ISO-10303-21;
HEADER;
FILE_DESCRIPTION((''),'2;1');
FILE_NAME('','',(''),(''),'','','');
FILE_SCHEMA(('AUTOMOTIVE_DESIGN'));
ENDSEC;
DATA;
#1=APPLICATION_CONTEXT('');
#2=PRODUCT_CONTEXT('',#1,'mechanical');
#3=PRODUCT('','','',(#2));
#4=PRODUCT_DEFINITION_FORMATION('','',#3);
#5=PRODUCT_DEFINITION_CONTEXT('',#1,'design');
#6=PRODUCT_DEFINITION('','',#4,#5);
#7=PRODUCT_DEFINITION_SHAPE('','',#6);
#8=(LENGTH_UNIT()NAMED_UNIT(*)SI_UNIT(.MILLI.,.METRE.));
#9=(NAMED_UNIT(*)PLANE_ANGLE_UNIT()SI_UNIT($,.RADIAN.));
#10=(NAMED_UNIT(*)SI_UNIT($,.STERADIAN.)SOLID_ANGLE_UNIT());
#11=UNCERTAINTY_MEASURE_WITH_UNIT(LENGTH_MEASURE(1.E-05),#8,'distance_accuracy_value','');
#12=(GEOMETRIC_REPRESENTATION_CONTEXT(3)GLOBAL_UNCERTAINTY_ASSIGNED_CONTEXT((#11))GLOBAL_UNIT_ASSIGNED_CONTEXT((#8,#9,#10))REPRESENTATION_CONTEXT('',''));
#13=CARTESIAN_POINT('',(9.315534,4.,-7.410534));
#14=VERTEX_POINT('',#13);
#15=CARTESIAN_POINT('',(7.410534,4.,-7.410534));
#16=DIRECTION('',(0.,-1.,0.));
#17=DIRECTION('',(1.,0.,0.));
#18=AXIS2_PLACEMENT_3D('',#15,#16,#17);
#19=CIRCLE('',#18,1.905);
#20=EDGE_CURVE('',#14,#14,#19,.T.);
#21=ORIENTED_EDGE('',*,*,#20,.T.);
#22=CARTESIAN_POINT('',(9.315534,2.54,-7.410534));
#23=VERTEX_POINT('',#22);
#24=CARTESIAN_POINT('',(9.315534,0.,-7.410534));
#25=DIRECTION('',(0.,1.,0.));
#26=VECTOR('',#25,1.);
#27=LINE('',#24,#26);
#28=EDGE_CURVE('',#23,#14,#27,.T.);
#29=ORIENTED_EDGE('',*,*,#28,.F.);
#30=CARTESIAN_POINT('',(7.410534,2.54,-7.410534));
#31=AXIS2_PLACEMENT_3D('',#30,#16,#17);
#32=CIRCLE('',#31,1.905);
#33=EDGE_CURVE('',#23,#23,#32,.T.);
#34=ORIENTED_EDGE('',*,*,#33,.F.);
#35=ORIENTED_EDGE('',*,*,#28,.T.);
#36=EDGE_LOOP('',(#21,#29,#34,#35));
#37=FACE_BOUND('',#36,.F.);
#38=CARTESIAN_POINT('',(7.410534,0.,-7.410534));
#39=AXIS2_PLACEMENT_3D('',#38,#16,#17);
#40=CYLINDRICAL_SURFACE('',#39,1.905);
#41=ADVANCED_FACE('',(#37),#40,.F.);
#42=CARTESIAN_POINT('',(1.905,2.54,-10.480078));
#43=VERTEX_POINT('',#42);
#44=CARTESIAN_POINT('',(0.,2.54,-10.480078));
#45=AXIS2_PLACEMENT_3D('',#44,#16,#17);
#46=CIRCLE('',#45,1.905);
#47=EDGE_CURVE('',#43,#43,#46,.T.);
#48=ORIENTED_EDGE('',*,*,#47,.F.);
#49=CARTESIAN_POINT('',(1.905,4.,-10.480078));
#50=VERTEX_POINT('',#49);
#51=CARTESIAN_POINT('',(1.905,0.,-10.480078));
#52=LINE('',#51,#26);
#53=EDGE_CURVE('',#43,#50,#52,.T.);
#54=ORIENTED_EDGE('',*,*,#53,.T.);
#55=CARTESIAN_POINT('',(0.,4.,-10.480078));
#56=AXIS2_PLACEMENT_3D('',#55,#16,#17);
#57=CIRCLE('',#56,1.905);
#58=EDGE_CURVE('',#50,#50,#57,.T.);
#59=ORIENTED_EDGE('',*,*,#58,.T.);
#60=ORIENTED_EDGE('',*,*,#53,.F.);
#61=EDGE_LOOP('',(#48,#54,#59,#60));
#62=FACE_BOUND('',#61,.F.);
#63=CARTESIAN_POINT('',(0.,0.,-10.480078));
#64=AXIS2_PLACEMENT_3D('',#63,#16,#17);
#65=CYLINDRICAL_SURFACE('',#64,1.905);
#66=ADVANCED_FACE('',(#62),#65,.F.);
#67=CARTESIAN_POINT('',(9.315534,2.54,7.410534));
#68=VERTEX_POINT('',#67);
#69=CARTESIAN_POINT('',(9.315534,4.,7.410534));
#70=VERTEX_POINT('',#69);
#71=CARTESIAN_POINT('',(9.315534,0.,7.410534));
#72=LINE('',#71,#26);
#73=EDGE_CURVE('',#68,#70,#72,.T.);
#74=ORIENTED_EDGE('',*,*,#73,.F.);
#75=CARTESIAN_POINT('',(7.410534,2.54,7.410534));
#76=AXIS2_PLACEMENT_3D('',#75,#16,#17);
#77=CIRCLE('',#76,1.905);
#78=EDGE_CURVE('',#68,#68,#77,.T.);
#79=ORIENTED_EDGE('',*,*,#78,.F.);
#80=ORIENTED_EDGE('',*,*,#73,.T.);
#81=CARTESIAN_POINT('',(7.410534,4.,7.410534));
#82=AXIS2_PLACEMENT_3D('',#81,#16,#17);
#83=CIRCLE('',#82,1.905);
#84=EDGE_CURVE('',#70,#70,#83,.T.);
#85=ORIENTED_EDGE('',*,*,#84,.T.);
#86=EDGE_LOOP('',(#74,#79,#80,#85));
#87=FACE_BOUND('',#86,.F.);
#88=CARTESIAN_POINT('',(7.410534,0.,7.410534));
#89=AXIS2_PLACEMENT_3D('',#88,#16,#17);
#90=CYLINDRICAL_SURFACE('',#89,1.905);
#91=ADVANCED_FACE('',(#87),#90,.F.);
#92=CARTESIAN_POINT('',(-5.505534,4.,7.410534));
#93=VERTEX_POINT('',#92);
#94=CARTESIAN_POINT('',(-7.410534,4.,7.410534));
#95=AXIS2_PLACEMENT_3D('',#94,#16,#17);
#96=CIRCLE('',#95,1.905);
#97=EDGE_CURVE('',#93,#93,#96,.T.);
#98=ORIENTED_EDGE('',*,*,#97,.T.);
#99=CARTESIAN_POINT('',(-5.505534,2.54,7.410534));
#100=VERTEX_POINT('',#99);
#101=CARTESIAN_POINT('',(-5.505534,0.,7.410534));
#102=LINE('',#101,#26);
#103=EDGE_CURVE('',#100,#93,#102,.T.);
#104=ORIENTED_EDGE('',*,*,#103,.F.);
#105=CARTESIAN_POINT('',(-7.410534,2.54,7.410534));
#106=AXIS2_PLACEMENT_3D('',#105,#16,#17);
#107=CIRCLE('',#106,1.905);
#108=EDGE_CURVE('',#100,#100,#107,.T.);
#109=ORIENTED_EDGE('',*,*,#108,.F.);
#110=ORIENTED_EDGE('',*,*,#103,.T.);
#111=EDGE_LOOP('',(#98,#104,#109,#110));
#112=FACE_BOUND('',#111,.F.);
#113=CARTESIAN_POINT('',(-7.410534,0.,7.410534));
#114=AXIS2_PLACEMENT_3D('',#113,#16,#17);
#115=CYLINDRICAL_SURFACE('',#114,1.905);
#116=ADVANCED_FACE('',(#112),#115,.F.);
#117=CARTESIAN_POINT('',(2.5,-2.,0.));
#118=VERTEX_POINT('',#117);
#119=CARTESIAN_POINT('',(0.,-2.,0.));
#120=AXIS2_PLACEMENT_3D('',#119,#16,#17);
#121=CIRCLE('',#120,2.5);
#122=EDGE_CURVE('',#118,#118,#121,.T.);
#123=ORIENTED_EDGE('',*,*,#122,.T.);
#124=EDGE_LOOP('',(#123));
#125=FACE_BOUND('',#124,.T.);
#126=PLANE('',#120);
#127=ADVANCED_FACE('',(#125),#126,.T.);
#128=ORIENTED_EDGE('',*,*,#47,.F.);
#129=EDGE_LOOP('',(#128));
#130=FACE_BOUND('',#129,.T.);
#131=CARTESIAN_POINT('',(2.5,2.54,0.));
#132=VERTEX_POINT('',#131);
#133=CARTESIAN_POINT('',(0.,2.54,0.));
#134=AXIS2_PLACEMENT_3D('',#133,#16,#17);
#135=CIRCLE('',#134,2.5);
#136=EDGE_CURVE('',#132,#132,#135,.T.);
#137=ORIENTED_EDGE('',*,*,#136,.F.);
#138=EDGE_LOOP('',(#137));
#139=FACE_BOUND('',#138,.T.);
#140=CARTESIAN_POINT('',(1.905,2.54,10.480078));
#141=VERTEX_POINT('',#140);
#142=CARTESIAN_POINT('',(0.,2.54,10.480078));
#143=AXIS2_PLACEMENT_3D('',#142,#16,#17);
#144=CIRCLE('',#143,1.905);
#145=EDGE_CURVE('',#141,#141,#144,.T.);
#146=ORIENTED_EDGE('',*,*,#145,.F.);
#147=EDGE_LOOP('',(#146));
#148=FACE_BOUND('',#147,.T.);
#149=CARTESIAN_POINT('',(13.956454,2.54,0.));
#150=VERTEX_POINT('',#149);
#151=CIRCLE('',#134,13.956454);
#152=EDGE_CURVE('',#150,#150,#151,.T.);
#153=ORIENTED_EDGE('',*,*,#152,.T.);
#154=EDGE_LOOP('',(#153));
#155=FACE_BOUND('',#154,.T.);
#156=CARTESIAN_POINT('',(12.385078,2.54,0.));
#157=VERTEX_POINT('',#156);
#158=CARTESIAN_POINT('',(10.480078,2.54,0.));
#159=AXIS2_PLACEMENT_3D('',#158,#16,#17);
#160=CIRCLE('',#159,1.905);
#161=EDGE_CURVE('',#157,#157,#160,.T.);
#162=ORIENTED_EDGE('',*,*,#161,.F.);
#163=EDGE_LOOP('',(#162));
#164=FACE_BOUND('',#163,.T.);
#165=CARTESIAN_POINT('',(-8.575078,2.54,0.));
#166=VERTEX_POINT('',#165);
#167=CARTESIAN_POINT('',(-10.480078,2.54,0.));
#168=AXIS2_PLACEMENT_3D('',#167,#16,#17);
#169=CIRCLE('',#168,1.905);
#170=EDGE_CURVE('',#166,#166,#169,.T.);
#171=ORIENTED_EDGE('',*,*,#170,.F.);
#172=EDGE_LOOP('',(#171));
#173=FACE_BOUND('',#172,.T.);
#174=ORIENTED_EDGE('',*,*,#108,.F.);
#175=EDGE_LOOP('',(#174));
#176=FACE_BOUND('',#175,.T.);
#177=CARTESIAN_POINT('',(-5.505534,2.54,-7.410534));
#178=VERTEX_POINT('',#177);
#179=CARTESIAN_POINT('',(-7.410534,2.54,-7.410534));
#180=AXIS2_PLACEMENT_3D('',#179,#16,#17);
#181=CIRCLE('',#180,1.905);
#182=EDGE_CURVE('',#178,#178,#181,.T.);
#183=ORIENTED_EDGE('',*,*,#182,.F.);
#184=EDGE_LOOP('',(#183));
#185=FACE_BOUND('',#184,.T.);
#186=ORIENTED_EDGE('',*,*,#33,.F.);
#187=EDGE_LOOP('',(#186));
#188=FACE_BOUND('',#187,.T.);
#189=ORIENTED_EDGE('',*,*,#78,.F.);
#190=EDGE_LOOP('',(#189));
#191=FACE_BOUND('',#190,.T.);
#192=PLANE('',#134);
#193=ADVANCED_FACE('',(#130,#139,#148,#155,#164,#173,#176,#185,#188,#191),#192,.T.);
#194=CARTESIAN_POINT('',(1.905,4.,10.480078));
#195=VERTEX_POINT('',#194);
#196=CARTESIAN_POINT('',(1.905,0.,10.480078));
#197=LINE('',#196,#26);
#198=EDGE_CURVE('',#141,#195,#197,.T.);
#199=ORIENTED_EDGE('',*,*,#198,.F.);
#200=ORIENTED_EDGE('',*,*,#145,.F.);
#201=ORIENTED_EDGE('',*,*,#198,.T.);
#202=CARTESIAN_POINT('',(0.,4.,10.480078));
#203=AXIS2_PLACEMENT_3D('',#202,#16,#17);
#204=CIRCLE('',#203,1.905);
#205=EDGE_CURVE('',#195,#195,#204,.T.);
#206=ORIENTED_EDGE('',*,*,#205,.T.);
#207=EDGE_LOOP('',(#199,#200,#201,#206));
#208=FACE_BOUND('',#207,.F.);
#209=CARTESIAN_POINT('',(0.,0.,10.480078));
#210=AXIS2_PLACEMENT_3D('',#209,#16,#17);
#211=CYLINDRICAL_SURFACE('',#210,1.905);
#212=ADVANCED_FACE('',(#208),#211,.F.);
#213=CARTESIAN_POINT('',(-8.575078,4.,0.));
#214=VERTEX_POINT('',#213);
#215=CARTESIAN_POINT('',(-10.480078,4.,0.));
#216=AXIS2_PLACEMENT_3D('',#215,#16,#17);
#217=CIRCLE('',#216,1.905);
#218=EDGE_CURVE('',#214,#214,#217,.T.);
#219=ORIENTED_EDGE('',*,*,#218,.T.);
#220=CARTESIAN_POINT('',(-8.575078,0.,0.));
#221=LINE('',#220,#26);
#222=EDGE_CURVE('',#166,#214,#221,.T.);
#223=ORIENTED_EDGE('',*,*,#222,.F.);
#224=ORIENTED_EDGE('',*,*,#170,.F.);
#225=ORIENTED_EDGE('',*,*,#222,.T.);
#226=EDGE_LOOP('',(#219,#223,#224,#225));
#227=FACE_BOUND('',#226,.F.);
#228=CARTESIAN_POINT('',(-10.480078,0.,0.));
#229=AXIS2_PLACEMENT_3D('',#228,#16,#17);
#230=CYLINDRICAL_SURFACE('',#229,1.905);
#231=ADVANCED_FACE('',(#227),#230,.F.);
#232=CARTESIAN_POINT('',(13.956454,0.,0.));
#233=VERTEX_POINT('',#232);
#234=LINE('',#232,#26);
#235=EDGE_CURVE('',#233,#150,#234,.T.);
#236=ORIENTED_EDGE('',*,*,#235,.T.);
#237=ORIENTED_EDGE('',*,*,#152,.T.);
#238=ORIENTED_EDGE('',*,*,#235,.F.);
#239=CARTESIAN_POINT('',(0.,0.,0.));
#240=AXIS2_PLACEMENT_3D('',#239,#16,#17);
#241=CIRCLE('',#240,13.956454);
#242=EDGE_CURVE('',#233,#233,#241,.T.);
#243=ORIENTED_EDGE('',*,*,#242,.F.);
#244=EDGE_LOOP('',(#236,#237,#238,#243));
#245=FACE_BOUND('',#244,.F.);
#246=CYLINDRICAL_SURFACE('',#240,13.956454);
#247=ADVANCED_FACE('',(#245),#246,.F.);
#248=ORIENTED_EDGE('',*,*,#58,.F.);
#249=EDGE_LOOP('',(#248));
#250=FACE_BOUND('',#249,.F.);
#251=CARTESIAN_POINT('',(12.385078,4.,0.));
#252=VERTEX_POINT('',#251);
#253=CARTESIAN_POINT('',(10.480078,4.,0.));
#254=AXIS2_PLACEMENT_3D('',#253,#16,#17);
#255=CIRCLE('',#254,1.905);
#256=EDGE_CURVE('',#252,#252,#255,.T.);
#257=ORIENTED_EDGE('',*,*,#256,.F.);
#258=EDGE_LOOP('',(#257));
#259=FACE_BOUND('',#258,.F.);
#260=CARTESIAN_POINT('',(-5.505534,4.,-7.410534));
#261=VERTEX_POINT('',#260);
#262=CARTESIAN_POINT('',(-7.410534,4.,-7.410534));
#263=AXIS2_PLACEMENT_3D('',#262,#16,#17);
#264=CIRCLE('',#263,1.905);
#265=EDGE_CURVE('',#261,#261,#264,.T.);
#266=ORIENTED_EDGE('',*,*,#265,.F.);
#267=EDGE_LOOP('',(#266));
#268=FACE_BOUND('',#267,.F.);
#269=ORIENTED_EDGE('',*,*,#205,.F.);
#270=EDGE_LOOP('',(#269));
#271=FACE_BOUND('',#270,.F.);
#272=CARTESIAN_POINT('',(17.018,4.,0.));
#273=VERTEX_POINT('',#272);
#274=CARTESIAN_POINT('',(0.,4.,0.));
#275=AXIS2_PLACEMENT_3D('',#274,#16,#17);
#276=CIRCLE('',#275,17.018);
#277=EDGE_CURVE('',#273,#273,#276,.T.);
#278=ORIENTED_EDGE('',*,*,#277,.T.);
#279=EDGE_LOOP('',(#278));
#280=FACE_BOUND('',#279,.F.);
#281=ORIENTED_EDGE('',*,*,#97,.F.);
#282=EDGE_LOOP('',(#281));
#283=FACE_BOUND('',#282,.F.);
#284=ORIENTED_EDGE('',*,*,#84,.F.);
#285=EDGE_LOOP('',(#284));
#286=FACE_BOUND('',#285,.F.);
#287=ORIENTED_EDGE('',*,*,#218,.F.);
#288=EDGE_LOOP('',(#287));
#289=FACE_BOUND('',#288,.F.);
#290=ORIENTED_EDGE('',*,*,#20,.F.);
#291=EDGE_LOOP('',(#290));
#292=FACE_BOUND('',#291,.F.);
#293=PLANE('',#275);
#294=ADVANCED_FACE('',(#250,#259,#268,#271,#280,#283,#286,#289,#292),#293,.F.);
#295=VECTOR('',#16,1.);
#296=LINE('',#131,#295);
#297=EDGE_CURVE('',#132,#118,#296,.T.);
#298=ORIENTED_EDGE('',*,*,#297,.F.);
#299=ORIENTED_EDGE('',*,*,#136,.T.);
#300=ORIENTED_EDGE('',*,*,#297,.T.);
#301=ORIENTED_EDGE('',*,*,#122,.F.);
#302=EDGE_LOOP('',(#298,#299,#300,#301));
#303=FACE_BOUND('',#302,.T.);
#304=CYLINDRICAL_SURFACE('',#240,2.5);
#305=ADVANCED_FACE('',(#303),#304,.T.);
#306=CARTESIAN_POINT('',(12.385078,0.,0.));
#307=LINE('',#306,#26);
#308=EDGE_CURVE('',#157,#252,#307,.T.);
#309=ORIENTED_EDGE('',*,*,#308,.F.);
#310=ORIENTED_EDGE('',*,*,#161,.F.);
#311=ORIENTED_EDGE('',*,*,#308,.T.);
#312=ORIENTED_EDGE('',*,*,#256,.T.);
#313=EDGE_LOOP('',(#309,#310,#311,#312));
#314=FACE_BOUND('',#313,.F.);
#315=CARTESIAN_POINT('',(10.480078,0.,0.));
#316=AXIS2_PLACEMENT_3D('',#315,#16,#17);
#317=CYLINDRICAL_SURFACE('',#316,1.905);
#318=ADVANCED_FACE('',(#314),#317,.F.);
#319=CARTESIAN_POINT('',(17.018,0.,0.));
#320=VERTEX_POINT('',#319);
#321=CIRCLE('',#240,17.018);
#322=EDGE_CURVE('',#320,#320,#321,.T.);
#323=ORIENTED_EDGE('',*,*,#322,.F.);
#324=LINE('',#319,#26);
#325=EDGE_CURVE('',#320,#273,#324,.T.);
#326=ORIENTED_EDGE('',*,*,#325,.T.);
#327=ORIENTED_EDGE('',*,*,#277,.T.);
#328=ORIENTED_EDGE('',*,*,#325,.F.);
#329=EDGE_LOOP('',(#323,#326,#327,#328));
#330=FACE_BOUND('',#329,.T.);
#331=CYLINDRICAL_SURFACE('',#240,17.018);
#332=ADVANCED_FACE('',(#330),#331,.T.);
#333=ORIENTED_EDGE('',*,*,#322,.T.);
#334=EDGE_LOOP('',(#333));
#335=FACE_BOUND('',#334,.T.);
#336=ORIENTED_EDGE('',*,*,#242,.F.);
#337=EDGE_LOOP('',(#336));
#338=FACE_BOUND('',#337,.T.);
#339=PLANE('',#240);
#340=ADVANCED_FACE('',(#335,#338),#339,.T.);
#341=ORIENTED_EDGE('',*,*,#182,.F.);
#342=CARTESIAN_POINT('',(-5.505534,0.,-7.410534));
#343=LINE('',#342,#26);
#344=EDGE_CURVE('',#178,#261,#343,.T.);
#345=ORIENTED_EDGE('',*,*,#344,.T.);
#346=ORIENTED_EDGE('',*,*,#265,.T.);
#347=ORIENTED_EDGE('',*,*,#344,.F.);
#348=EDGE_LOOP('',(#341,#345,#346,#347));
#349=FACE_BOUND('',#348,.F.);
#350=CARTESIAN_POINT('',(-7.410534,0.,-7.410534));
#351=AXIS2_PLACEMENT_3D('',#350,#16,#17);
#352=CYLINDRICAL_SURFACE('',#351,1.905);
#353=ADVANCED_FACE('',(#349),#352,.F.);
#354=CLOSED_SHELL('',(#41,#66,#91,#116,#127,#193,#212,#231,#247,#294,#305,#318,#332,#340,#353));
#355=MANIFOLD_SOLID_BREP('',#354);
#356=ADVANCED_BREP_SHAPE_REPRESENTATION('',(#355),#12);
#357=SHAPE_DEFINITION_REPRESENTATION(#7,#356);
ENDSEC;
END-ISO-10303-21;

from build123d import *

# Parameters (mm, degrees)
F0_R      = 17.018
F1_DEPTH  = 4
F4_R      = 2.5
F5_DEPTH  = 2
F7_R      = 1.905
F8_DEPTH  = 25.4
F9_R      = 13.9564544628
F9_R_2    = 1.905
F9_R_3    = 2.5
F10_DEPTH = 2.54


# Not quite as in the source:
# - the program builds the solid bodies; features that only make, move or delete a surface that nothing else refers to are left out


with BuildPart() as f1:
    # F0 (on Front) → F1 (new body)
    with BuildSketch(Plane.XZ):
        Circle(F0_R)
    extrude(amount=-F1_DEPTH)

    # F4 (on Front) → F5 (join)
    with BuildSketch(Plane.XZ):
        Circle(F4_R)
    extrude(amount=F5_DEPTH)

    # F7 (on face) → F8 (cut)
    with BuildSketch(Plane.XZ):
        with Locations((-7.4105341768, 7.4105341768)):
            Circle(F7_R)
        with Locations((0, 10.4800779372)):
            Circle(F7_R)
        with Locations((7.4105341768, 7.4105341768)):
            Circle(F7_R)
        with Locations((10.4800779372, 0)):
            Circle(F7_R)
        with Locations((7.4105341768, -7.4105341768)):
            Circle(F7_R)
        with Locations((0, -10.4800779372)):
            Circle(F7_R)
        with Locations((-7.4105341768, -7.4105341768)):
            Circle(F7_R)
        with Locations((-10.4800779372, 0)):
            Circle(F7_R)
    extrude(amount=-F8_DEPTH, mode=Mode.SUBTRACT)

    # F9 (on face) → F10 (cut)
    with BuildSketch(Plane.XZ):
        Circle(F9_R)
        with Locations((-7.4105341768, -7.4105341768)):
            Circle(F9_R_2, mode=Mode.SUBTRACT)
        with Locations((0, -10.4800779372)):
            Circle(F9_R_2, mode=Mode.SUBTRACT)
        with Locations((7.4105341768, -7.4105341768)):
            Circle(F9_R_2, mode=Mode.SUBTRACT)
        with Locations((-10.4800779372, 0)):
            Circle(F9_R_2, mode=Mode.SUBTRACT)
        with Locations((-7.4105341768, 7.4105341768)):
            Circle(F9_R_2, mode=Mode.SUBTRACT)
        Circle(F9_R_3, mode=Mode.SUBTRACT)
        with Locations((7.4105341768, 7.4105341768)):
            Circle(F9_R_2, mode=Mode.SUBTRACT)
        with Locations((10.4800779372, 0)):
            Circle(F9_R_2, mode=Mode.SUBTRACT)
        with Locations((0, 10.4800779372)):
            Circle(F9_R_2, mode=Mode.SUBTRACT)
    extrude(amount=-F10_DEPTH, mode=Mode.SUBTRACT)


solid = f1.part
